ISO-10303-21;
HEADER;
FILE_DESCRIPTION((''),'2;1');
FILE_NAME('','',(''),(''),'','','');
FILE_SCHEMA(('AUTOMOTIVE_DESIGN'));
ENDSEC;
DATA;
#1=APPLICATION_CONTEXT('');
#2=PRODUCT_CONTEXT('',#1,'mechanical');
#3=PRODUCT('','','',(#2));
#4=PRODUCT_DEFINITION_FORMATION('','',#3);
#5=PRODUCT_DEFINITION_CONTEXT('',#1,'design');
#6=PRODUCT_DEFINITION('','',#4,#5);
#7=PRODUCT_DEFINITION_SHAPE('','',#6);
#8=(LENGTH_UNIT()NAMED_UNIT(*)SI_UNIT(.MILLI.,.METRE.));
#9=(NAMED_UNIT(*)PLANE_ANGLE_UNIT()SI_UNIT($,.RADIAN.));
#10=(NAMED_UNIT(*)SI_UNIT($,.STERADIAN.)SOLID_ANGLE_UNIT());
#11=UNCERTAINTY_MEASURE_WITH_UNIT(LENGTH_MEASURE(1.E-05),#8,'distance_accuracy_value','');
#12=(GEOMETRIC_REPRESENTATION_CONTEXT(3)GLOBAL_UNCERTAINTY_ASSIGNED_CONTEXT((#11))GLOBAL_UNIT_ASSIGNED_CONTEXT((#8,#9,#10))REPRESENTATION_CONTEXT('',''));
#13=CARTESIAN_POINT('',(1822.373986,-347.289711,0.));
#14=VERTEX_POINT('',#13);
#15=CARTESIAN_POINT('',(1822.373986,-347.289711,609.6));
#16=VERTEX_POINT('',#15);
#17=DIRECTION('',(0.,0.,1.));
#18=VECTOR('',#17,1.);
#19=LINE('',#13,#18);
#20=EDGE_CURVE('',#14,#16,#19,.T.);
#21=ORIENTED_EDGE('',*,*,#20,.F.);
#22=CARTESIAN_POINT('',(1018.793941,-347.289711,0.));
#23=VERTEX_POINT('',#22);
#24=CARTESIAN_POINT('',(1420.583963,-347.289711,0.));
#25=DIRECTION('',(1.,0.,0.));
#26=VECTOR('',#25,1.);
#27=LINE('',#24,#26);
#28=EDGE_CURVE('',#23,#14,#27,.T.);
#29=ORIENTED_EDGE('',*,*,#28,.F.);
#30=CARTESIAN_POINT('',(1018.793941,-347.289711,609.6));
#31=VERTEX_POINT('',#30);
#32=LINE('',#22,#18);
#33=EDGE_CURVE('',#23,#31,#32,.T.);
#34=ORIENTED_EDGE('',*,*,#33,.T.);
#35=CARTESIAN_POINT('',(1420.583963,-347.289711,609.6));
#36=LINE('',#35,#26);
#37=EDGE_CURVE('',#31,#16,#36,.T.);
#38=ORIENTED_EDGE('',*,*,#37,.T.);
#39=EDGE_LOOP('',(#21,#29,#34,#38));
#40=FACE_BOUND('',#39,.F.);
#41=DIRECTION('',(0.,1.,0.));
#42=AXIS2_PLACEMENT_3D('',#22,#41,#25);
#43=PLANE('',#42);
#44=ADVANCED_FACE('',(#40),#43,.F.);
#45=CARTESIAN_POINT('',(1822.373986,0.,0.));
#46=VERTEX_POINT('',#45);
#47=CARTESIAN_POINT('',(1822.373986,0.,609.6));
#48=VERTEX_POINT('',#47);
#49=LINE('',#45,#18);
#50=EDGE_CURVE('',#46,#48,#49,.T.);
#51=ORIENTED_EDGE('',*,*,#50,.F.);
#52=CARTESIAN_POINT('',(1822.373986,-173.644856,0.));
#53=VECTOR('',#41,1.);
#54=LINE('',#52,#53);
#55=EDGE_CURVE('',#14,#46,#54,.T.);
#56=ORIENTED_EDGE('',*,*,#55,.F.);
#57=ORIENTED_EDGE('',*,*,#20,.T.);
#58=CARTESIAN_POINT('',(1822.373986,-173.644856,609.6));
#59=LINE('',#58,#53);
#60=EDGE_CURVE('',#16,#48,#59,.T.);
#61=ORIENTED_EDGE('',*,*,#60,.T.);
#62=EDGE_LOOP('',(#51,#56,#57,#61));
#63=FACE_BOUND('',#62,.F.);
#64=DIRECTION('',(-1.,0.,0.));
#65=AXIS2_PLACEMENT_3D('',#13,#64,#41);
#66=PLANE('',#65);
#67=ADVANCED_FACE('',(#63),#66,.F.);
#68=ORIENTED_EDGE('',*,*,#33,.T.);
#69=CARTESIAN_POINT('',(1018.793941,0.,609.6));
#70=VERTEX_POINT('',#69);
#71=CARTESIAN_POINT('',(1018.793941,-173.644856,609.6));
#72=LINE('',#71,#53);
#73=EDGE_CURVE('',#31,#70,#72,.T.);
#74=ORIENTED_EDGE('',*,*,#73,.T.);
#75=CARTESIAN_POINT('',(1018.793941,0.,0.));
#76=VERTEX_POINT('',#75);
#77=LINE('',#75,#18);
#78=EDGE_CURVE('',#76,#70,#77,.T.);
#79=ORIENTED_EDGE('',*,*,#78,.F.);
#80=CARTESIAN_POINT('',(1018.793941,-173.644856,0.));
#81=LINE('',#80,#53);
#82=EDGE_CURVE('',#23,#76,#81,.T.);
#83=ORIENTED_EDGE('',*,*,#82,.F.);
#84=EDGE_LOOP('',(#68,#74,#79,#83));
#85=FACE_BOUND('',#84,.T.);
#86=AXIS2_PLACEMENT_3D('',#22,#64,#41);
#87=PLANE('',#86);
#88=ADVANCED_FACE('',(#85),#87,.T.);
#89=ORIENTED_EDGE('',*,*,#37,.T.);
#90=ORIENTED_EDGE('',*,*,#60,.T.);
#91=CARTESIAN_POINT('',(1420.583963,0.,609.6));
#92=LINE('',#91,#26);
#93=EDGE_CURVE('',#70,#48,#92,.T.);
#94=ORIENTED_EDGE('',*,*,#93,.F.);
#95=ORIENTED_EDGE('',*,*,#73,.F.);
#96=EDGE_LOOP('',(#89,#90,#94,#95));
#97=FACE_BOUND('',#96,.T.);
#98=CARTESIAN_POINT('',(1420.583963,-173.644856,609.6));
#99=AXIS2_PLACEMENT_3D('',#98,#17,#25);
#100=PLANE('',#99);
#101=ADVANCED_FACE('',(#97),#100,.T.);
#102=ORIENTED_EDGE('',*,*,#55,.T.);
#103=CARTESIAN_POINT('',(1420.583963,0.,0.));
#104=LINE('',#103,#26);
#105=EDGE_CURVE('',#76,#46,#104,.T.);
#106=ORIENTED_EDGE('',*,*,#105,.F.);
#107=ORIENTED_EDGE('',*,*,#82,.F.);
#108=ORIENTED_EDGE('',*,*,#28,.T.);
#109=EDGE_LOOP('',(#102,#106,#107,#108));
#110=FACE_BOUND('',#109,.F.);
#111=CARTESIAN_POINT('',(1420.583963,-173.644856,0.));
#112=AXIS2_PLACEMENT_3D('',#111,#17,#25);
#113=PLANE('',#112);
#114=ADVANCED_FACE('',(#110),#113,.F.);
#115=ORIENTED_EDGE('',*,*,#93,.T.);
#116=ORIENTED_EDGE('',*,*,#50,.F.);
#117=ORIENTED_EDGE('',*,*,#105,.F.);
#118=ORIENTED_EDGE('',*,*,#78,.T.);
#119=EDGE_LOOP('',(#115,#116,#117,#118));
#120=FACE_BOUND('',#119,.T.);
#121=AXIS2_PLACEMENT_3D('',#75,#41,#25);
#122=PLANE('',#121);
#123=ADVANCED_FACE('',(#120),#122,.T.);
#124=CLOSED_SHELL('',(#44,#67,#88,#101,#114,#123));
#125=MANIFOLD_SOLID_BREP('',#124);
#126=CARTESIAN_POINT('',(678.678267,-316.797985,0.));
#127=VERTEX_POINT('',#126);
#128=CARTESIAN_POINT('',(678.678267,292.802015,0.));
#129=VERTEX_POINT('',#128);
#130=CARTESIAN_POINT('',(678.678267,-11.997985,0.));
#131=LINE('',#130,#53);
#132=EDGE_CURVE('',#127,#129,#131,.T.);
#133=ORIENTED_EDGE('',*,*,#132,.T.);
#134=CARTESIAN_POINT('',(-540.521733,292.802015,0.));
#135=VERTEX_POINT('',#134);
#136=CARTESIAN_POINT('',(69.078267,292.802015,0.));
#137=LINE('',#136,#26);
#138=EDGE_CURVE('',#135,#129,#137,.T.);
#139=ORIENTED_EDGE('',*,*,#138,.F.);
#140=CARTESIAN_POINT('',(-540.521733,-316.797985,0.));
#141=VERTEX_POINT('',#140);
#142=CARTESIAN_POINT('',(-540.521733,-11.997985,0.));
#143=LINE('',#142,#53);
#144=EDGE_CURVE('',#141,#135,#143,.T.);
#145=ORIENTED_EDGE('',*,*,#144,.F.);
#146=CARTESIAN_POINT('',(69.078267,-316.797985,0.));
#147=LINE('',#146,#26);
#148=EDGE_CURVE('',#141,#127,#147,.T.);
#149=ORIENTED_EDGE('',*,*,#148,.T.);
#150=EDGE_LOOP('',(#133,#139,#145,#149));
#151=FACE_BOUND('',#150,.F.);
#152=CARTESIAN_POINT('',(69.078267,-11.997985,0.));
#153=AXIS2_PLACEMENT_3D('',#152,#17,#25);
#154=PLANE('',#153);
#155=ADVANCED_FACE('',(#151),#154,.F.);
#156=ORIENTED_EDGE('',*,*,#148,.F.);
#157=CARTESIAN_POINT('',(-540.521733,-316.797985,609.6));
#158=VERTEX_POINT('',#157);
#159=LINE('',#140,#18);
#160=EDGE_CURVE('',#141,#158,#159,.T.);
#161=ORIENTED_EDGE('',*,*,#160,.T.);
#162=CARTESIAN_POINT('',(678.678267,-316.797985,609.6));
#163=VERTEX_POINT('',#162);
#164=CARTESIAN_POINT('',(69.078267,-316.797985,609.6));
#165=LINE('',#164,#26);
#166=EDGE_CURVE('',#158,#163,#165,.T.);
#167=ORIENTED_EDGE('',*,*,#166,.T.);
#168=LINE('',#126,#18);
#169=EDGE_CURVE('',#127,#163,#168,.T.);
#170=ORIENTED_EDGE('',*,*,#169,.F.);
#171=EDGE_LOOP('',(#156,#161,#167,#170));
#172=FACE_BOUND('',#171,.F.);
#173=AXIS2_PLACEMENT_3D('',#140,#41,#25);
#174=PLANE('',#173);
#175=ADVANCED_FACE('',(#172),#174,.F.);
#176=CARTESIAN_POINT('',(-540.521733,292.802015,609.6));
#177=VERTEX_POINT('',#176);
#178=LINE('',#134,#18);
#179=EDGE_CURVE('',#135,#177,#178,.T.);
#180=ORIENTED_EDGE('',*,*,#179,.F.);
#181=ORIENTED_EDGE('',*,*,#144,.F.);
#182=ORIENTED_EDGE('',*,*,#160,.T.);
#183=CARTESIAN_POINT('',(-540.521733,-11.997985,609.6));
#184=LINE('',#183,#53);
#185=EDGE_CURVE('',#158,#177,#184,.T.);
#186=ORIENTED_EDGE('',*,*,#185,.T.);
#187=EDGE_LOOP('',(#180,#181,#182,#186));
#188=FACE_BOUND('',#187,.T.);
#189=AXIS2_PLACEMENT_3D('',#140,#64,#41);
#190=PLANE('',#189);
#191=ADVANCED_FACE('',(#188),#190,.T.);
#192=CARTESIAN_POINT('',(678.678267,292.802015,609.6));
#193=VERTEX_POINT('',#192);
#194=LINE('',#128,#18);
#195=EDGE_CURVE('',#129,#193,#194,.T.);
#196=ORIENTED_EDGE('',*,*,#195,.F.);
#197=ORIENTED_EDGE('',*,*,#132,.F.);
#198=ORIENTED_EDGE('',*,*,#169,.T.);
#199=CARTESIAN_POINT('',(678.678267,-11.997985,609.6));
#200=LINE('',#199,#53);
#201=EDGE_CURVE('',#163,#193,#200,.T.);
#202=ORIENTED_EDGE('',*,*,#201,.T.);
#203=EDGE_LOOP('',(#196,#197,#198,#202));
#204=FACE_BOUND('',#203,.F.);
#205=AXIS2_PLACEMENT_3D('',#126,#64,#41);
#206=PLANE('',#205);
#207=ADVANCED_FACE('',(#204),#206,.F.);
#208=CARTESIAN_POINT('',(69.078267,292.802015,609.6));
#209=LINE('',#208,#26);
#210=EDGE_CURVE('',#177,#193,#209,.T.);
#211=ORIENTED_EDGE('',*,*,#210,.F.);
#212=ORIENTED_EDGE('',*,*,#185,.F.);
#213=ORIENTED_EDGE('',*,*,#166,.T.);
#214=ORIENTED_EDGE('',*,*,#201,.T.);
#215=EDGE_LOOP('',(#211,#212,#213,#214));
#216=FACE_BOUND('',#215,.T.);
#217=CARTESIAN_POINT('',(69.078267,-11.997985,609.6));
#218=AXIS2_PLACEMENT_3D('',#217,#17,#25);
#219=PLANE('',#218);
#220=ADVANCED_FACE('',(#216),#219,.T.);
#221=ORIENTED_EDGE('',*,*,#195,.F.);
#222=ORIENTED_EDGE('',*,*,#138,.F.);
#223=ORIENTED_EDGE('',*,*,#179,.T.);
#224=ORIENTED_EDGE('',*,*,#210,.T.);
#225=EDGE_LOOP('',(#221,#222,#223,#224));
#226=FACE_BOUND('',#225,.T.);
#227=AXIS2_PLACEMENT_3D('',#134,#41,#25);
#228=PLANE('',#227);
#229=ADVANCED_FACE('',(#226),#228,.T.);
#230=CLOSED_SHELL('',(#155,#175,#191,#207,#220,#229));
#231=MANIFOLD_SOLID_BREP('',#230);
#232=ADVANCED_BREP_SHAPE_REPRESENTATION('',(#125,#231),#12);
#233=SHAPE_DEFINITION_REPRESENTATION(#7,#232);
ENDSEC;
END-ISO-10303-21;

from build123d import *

# Parameters (mm, degrees)
F0_W     = 1219.2
F0_H     = 609.6
F1_DEPTH = 609.6
F0_W_2   = 803.5800457001
F0_H_2   = 347.289711237


# Not quite as in the source:
# - the program builds the solid bodies; features that only make, move or delete a surface that nothing else refers to are left out


with BuildPart() as f1:
    # F0 (on Top) → F1 (new body)
    with BuildSketch(Plane.XY):
        with Locations((69.0782666206, -11.9979847915)):
            Rectangle(F0_W, F0_H)
    extrude(amount=F1_DEPTH)


with BuildPart() as f1b:
    # F0 (on Top) → F1, piece 2 (new body)
    with BuildSketch(Plane.XY):
        with Locations((1420.5839633942, -173.6448556185)):
            Rectangle(F0_W_2, F0_H_2)
    extrude(amount=F1_DEPTH)


solid = Compound([f1.part, f1b.part])
